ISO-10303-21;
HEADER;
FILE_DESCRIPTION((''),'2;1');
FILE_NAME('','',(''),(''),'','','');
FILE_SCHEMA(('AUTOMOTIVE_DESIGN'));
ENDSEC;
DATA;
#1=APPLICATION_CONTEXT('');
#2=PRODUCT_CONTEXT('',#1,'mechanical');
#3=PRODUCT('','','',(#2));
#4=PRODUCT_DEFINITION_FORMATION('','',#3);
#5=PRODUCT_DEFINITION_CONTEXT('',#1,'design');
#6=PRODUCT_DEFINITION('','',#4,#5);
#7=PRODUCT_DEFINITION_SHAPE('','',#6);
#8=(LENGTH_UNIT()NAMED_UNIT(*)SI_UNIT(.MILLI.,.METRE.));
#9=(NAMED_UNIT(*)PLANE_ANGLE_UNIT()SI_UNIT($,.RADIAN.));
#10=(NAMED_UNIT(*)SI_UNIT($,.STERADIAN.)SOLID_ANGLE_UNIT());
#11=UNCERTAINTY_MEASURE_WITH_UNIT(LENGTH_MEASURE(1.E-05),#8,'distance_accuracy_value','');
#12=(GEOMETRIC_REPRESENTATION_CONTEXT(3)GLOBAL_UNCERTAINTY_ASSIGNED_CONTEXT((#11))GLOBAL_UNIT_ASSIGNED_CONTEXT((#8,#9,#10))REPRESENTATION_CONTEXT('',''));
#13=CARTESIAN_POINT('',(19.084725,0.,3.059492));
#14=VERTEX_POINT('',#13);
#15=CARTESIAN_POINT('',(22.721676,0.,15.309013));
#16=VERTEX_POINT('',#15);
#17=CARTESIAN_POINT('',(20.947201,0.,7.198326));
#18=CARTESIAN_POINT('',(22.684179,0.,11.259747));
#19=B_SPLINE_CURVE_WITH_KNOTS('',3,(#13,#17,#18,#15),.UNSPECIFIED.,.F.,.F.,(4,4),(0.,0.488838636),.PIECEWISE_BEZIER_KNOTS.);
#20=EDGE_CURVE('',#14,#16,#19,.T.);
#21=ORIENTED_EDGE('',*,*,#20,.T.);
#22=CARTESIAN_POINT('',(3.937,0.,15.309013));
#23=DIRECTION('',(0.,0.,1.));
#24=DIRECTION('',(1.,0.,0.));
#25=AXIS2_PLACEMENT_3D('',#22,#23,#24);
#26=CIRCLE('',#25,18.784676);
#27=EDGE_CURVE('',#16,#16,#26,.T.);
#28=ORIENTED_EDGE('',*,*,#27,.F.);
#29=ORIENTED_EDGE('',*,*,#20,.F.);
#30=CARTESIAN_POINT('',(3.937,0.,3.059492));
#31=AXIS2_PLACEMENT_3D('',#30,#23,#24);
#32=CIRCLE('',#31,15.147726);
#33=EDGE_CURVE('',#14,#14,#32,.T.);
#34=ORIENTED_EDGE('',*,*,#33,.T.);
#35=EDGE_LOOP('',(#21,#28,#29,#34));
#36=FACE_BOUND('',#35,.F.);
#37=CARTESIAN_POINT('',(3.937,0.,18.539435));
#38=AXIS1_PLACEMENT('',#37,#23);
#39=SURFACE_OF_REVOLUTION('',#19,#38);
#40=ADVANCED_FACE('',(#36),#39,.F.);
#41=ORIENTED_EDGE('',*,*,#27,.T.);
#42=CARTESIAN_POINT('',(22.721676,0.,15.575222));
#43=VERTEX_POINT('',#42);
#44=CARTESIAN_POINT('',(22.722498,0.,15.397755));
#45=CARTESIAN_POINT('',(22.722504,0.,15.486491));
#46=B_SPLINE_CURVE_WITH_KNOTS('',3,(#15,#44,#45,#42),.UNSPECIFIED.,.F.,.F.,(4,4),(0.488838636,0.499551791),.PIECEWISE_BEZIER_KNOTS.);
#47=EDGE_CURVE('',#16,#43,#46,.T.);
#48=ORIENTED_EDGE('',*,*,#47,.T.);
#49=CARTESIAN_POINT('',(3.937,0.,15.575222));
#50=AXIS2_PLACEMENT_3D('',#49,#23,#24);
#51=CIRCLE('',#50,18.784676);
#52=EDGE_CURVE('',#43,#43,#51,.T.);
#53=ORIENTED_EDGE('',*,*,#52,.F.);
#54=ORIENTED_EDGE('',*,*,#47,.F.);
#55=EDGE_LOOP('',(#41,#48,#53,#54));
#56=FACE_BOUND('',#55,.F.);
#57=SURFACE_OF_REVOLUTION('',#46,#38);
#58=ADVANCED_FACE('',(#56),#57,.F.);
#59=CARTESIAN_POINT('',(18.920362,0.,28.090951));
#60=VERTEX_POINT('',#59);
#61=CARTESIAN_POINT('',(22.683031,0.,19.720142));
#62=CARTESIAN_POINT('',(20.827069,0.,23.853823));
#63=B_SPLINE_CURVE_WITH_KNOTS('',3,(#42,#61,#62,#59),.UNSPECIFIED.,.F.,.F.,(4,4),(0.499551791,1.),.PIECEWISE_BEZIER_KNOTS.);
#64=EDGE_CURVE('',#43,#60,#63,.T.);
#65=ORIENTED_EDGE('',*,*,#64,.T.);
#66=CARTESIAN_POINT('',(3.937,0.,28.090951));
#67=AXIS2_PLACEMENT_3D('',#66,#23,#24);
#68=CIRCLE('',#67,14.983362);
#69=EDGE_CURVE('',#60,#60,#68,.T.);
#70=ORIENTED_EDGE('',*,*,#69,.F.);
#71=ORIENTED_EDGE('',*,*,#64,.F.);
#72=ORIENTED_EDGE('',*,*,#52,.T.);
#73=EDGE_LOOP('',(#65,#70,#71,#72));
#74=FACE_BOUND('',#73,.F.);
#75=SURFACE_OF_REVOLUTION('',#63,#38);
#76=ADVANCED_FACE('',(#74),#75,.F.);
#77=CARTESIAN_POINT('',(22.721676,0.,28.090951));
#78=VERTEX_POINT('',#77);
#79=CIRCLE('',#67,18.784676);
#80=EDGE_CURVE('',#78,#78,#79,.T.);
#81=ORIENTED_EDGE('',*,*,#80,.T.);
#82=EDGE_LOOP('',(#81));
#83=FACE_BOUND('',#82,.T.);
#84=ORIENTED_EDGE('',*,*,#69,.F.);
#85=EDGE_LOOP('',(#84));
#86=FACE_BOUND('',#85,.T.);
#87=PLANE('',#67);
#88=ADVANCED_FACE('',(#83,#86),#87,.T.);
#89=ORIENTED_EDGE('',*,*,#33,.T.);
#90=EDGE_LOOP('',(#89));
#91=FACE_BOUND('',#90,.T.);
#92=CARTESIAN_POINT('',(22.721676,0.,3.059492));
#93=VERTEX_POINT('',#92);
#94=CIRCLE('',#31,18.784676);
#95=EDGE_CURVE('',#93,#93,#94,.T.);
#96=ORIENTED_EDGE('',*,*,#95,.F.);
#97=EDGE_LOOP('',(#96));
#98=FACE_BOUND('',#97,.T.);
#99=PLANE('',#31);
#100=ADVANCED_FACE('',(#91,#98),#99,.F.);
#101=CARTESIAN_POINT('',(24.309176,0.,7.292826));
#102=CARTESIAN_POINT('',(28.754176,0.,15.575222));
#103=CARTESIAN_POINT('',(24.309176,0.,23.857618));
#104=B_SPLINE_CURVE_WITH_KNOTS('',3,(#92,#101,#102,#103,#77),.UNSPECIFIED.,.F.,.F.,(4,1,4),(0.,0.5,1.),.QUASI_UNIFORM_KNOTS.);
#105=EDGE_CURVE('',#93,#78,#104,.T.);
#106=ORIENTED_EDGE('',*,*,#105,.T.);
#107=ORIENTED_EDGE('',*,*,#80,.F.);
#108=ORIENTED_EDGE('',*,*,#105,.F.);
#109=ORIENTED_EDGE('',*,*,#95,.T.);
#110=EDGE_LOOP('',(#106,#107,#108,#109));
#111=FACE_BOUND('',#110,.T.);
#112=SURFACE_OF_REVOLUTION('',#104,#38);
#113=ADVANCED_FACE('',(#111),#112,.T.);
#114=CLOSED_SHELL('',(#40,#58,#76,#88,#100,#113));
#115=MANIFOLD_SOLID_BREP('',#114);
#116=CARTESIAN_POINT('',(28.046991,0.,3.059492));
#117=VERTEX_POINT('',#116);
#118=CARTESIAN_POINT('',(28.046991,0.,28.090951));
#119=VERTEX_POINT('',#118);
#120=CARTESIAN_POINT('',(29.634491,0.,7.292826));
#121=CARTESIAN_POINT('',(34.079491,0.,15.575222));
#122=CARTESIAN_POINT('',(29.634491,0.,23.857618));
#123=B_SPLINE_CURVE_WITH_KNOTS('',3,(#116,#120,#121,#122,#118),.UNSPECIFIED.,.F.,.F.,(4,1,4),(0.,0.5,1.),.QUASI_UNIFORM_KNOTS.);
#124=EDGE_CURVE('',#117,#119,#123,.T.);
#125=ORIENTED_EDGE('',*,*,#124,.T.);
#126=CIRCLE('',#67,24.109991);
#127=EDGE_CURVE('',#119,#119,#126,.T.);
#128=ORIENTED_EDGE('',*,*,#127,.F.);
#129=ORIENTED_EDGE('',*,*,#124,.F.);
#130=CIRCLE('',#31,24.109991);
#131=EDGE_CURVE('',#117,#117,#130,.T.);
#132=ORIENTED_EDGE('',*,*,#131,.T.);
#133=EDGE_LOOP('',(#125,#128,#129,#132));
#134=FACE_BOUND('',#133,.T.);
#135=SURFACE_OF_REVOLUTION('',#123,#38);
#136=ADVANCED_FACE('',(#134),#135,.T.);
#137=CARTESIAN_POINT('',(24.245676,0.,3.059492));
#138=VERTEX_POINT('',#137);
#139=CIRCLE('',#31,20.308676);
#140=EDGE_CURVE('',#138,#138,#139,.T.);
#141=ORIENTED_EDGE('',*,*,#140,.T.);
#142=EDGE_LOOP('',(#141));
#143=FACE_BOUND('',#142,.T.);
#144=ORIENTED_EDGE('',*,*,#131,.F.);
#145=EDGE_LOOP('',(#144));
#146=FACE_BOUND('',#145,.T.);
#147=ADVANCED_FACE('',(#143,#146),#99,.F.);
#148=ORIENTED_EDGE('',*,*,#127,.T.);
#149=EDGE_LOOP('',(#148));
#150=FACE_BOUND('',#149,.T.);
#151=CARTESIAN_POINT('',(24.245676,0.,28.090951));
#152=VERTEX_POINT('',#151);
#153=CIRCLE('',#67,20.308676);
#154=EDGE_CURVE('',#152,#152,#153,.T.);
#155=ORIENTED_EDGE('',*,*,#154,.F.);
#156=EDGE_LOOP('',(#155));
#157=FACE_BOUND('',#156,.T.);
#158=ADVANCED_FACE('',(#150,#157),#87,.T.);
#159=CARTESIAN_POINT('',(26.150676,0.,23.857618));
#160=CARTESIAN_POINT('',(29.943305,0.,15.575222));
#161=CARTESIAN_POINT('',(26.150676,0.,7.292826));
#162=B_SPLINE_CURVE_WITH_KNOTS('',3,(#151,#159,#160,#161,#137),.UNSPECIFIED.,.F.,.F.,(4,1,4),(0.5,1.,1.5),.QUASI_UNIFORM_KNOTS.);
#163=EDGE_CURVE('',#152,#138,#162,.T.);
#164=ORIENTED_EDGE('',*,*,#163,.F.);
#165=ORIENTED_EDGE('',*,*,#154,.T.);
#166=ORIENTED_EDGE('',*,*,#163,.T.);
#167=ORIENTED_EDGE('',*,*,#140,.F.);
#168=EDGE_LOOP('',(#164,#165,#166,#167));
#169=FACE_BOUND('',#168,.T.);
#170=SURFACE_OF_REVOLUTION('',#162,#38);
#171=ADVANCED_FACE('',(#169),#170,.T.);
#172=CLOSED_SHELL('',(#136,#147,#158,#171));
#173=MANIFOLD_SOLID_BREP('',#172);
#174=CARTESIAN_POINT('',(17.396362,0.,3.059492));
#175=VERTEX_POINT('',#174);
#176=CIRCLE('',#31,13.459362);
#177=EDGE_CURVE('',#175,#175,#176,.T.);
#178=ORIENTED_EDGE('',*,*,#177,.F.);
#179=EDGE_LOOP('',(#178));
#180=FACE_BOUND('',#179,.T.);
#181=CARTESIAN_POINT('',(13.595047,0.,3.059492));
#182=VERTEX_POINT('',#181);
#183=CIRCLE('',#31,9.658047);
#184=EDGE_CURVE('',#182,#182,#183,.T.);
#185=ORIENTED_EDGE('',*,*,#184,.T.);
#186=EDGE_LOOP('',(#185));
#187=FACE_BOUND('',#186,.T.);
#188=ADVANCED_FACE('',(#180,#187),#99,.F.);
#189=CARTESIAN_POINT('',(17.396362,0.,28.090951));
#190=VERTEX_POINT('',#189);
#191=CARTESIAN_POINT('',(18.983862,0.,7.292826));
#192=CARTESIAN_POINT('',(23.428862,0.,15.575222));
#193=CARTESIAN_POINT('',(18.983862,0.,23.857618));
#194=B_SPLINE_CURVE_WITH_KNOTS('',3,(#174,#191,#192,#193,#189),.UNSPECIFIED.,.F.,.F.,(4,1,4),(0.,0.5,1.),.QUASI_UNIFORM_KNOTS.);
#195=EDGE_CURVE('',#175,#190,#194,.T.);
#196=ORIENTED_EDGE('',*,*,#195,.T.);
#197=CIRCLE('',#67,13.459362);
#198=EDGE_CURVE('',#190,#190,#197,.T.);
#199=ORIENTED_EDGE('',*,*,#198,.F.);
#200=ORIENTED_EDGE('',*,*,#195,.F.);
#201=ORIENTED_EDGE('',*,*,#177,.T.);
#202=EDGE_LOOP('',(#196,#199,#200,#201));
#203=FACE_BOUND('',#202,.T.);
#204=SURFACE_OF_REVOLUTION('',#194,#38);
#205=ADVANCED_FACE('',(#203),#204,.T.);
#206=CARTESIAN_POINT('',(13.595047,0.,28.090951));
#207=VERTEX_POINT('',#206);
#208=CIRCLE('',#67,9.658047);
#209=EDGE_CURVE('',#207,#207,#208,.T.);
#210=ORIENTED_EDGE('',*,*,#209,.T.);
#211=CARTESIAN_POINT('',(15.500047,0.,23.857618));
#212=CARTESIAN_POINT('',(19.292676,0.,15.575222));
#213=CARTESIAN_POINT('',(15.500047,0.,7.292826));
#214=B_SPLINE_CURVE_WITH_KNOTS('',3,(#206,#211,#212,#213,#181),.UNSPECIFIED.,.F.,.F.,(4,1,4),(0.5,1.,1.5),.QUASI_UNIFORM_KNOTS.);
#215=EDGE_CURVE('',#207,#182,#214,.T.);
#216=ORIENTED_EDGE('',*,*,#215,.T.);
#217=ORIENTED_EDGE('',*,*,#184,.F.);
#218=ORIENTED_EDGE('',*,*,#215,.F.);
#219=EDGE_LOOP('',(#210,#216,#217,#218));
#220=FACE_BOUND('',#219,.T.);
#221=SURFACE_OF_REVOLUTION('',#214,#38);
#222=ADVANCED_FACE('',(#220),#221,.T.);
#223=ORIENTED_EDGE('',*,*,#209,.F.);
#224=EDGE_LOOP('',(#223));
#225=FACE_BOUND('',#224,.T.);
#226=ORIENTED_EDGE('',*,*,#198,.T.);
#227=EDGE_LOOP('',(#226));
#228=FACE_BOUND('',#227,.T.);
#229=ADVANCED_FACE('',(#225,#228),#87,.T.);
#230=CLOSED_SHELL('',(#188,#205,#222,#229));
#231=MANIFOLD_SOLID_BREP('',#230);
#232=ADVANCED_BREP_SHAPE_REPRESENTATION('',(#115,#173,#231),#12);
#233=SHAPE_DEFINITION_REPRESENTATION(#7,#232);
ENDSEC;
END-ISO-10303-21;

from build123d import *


# Not quite as in the source:
# - a feature names something its author has since deleted; it is built from what else it names


with BuildPart() as f1:
    # F0 (on Front) → F1 (revolve)
    with BuildSketch(Plane.XZ):
        with BuildLine():
            Line((13.5950473221, 3.0594923287), (17.3963618184, 3.0594923287))
            Line((17.3963618184, 3.0594923287), (17.3963618184, 15.575221673))
            add(Edge.make_bspline(
                [(13.5950473221, 3.0594923287), (15.5000473221, 7.292825662), (17.3963618184, 11.4340236675), (17.3963618184, 15.575221673)],
                knots=[0, 0, 0, 0, 0.5, 0.5, 0.5, 0.5], degree=3))
        make_face()
        with BuildLine():
            Line((17.3963618184, 15.575221673), (17.3963618184, 3.0594923287))
            add(Edge.make_bspline(
                [(17.3963618184, 3.0594923287), (18.9838618184, 7.292825662), (21.2063618184, 11.4340236675), (21.2063618184, 15.575221673)],
                knots=[0, 0, 0, 0, 0.5, 0.5, 0.5, 0.5], degree=3))
            Line((21.2063618184, 15.575221673), (17.3963618184, 15.575221673))
        make_face()
        with BuildLine():
            Line((17.3963618184, 28.0909510174), (17.3963618184, 15.575221673))
            Line((17.3963618184, 15.575221673), (21.2063618184, 15.575221673))
            add(Edge.make_bspline(
                [(21.2063618184, 15.575221673), (21.2063618184, 19.7164196785), (18.9838618184, 23.857617684), (17.3963618184, 28.0909510174)],
                knots=[0.5, 0.5, 0.5, 0.5, 1, 1, 1, 1], degree=3))
        make_face()
        with BuildLine():
            add(Edge.make_bspline(
                [(17.3963618184, 15.575221673), (17.3963618184, 19.7164196785), (15.5000473221, 23.857617684), (13.5950473221, 28.0909510174)],
                knots=[0.5, 0.5, 0.5, 0.5, 1, 1, 1, 1], degree=3))
            Line((17.3963618184, 15.575221673), (17.3963618184, 28.0909510174))
            Line((17.3963618184, 28.0909510174), (13.5950473221, 28.0909510174))
        make_face()
    revolve(axis=Axis((3.9369999431, 0, 18.5394347056), (0, 0, 1)))


with BuildPart() as f1b:
    # F0 (on Front) → F1, piece 2 (revolve)
    with BuildSketch(Plane.XZ):
        with BuildLine():
            add(Edge.make_bspline(
                [(22.7216763147, 15.575221673), (22.6830307897, 19.7201419856), (20.8270694931, 23.8538228515), (18.9203618184, 28.0909510174)],
                knots=[0.4995517914, 0.4995517914, 0.4995517914, 0.4995517914, 1, 1, 1, 1], degree=3))
            Line((22.7216763147, 15.575221673), (22.7216763147, 28.0909510174))
            Line((22.7216763147, 28.0909510174), (18.9203618184, 28.0909510174))
        make_face()
        with BuildLine():
            Line((22.7216763147, 15.575221673), (26.5316763147, 15.575221673))
            add(Edge.make_bspline(
                [(26.5316763147, 15.575221673), (26.5316763147, 19.7164196785), (24.3091763147, 23.857617684), (22.7216763147, 28.0909510174)],
                knots=[0.5, 0.5, 0.5, 0.5, 1, 1, 1, 1], degree=3))
            Line((22.7216763147, 28.0909510174), (22.7216763147, 15.575221673))
        make_face()
        with BuildLine():
            Line((22.7216763147, 15.309013096), (22.7216763147, 3.0594923287))
            add(Edge.make_bspline(
                [(22.7216763147, 3.0594923287), (24.3091763147, 7.292825662), (26.5316763147, 11.4340236675), (26.5316763147, 15.575221673)],
                knots=[0, 0, 0, 0, 0.5, 0.5, 0.5, 0.5], degree=3))
            Line((26.5316763147, 15.575221673), (22.7216763147, 15.575221673))
            add(Edge.make_bspline(
                [(22.7216763147, 15.309013096), (22.7224980817, 15.3977548969), (22.7225036042, 15.4864908603), (22.7216763147, 15.575221673)],
                knots=[0.4888386358, 0.4888386358, 0.4888386358, 0.4888386358, 0.4995517914, 0.4995517914, 0.4995517914, 0.4995517914], degree=3))
        make_face()
        with BuildLine():
            Line((19.084725447, 3.0594923287), (22.7216763147, 3.0594923287))
            Line((22.7216763147, 3.0594923287), (22.7216763147, 15.309013096))
            add(Edge.make_bspline(
                [(19.084725447, 3.0594923287), (20.9472006495, 7.1983261121), (22.684179292, 11.2597467075), (22.7216763147, 15.309013096)],
                knots=[0, 0, 0, 0, 0.4888386358, 0.4888386358, 0.4888386358, 0.4888386358], degree=3))
        make_face()
    revolve(axis=Axis((3.9369999431, 0, 18.5394347056), (0, 0, 1)))


with BuildPart() as f1c:
    # F0 (on Front) → F1, piece 3 (revolve)
    with BuildSketch(Plane.XZ):
        with BuildLine():
            add(Edge.make_bspline(
                [(24.2456763147, 3.0594923287), (26.1506763147, 7.292825662), (28.0469908111, 11.4340236675), (28.0469908111, 15.575221673)],
                knots=[0, 0, 0, 0, 0.5, 0.5, 0.5, 0.5], degree=3))
            Line((24.2456763147, 3.0594923287), (28.0469908111, 3.0594923287))
            Line((28.0469908111, 3.0594923287), (28.0469908111, 15.575221673))
        make_face()
        with BuildLine():
            add(Edge.make_bspline(
                [(28.0469908111, 15.575221673), (28.0469908111, 19.7164196785), (26.1506763147, 23.857617684), (24.2456763147, 28.0909510174)],
                knots=[0.5, 0.5, 0.5, 0.5, 1, 1, 1, 1], degree=3))
            Line((28.0469908111, 15.575221673), (28.0469908111, 28.0909510174))
            Line((28.0469908111, 28.0909510174), (24.2456763147, 28.0909510174))
        make_face()
        with BuildLine():
            Line((28.0469908111, 15.575221673), (28.0469908111, 3.0594923287))
            add(Edge.make_bspline(
                [(28.0469908111, 3.0594923287), (29.6344908111, 7.292825662), (31.8569908111, 11.4340236675), (31.8569908111, 15.575221673)],
                knots=[0, 0, 0, 0, 0.5, 0.5, 0.5, 0.5], degree=3))
            Line((31.8569908111, 15.575221673), (28.0469908111, 15.575221673))
        make_face()
        with BuildLine():
            Line((28.0469908111, 28.0909510174), (28.0469908111, 15.575221673))
            Line((28.0469908111, 15.575221673), (31.8569908111, 15.575221673))
            add(Edge.make_bspline(
                [(31.8569908111, 15.575221673), (31.8569908111, 19.7164196785), (29.6344908111, 23.857617684), (28.0469908111, 28.0909510174)],
                knots=[0.5, 0.5, 0.5, 0.5, 1, 1, 1, 1], degree=3))
        make_face()
    revolve(axis=Axis((3.9369999431, 0, 18.5394347056), (0, 0, 1)))


solid = Compound([f1.part, f1b.part, f1c.part])
